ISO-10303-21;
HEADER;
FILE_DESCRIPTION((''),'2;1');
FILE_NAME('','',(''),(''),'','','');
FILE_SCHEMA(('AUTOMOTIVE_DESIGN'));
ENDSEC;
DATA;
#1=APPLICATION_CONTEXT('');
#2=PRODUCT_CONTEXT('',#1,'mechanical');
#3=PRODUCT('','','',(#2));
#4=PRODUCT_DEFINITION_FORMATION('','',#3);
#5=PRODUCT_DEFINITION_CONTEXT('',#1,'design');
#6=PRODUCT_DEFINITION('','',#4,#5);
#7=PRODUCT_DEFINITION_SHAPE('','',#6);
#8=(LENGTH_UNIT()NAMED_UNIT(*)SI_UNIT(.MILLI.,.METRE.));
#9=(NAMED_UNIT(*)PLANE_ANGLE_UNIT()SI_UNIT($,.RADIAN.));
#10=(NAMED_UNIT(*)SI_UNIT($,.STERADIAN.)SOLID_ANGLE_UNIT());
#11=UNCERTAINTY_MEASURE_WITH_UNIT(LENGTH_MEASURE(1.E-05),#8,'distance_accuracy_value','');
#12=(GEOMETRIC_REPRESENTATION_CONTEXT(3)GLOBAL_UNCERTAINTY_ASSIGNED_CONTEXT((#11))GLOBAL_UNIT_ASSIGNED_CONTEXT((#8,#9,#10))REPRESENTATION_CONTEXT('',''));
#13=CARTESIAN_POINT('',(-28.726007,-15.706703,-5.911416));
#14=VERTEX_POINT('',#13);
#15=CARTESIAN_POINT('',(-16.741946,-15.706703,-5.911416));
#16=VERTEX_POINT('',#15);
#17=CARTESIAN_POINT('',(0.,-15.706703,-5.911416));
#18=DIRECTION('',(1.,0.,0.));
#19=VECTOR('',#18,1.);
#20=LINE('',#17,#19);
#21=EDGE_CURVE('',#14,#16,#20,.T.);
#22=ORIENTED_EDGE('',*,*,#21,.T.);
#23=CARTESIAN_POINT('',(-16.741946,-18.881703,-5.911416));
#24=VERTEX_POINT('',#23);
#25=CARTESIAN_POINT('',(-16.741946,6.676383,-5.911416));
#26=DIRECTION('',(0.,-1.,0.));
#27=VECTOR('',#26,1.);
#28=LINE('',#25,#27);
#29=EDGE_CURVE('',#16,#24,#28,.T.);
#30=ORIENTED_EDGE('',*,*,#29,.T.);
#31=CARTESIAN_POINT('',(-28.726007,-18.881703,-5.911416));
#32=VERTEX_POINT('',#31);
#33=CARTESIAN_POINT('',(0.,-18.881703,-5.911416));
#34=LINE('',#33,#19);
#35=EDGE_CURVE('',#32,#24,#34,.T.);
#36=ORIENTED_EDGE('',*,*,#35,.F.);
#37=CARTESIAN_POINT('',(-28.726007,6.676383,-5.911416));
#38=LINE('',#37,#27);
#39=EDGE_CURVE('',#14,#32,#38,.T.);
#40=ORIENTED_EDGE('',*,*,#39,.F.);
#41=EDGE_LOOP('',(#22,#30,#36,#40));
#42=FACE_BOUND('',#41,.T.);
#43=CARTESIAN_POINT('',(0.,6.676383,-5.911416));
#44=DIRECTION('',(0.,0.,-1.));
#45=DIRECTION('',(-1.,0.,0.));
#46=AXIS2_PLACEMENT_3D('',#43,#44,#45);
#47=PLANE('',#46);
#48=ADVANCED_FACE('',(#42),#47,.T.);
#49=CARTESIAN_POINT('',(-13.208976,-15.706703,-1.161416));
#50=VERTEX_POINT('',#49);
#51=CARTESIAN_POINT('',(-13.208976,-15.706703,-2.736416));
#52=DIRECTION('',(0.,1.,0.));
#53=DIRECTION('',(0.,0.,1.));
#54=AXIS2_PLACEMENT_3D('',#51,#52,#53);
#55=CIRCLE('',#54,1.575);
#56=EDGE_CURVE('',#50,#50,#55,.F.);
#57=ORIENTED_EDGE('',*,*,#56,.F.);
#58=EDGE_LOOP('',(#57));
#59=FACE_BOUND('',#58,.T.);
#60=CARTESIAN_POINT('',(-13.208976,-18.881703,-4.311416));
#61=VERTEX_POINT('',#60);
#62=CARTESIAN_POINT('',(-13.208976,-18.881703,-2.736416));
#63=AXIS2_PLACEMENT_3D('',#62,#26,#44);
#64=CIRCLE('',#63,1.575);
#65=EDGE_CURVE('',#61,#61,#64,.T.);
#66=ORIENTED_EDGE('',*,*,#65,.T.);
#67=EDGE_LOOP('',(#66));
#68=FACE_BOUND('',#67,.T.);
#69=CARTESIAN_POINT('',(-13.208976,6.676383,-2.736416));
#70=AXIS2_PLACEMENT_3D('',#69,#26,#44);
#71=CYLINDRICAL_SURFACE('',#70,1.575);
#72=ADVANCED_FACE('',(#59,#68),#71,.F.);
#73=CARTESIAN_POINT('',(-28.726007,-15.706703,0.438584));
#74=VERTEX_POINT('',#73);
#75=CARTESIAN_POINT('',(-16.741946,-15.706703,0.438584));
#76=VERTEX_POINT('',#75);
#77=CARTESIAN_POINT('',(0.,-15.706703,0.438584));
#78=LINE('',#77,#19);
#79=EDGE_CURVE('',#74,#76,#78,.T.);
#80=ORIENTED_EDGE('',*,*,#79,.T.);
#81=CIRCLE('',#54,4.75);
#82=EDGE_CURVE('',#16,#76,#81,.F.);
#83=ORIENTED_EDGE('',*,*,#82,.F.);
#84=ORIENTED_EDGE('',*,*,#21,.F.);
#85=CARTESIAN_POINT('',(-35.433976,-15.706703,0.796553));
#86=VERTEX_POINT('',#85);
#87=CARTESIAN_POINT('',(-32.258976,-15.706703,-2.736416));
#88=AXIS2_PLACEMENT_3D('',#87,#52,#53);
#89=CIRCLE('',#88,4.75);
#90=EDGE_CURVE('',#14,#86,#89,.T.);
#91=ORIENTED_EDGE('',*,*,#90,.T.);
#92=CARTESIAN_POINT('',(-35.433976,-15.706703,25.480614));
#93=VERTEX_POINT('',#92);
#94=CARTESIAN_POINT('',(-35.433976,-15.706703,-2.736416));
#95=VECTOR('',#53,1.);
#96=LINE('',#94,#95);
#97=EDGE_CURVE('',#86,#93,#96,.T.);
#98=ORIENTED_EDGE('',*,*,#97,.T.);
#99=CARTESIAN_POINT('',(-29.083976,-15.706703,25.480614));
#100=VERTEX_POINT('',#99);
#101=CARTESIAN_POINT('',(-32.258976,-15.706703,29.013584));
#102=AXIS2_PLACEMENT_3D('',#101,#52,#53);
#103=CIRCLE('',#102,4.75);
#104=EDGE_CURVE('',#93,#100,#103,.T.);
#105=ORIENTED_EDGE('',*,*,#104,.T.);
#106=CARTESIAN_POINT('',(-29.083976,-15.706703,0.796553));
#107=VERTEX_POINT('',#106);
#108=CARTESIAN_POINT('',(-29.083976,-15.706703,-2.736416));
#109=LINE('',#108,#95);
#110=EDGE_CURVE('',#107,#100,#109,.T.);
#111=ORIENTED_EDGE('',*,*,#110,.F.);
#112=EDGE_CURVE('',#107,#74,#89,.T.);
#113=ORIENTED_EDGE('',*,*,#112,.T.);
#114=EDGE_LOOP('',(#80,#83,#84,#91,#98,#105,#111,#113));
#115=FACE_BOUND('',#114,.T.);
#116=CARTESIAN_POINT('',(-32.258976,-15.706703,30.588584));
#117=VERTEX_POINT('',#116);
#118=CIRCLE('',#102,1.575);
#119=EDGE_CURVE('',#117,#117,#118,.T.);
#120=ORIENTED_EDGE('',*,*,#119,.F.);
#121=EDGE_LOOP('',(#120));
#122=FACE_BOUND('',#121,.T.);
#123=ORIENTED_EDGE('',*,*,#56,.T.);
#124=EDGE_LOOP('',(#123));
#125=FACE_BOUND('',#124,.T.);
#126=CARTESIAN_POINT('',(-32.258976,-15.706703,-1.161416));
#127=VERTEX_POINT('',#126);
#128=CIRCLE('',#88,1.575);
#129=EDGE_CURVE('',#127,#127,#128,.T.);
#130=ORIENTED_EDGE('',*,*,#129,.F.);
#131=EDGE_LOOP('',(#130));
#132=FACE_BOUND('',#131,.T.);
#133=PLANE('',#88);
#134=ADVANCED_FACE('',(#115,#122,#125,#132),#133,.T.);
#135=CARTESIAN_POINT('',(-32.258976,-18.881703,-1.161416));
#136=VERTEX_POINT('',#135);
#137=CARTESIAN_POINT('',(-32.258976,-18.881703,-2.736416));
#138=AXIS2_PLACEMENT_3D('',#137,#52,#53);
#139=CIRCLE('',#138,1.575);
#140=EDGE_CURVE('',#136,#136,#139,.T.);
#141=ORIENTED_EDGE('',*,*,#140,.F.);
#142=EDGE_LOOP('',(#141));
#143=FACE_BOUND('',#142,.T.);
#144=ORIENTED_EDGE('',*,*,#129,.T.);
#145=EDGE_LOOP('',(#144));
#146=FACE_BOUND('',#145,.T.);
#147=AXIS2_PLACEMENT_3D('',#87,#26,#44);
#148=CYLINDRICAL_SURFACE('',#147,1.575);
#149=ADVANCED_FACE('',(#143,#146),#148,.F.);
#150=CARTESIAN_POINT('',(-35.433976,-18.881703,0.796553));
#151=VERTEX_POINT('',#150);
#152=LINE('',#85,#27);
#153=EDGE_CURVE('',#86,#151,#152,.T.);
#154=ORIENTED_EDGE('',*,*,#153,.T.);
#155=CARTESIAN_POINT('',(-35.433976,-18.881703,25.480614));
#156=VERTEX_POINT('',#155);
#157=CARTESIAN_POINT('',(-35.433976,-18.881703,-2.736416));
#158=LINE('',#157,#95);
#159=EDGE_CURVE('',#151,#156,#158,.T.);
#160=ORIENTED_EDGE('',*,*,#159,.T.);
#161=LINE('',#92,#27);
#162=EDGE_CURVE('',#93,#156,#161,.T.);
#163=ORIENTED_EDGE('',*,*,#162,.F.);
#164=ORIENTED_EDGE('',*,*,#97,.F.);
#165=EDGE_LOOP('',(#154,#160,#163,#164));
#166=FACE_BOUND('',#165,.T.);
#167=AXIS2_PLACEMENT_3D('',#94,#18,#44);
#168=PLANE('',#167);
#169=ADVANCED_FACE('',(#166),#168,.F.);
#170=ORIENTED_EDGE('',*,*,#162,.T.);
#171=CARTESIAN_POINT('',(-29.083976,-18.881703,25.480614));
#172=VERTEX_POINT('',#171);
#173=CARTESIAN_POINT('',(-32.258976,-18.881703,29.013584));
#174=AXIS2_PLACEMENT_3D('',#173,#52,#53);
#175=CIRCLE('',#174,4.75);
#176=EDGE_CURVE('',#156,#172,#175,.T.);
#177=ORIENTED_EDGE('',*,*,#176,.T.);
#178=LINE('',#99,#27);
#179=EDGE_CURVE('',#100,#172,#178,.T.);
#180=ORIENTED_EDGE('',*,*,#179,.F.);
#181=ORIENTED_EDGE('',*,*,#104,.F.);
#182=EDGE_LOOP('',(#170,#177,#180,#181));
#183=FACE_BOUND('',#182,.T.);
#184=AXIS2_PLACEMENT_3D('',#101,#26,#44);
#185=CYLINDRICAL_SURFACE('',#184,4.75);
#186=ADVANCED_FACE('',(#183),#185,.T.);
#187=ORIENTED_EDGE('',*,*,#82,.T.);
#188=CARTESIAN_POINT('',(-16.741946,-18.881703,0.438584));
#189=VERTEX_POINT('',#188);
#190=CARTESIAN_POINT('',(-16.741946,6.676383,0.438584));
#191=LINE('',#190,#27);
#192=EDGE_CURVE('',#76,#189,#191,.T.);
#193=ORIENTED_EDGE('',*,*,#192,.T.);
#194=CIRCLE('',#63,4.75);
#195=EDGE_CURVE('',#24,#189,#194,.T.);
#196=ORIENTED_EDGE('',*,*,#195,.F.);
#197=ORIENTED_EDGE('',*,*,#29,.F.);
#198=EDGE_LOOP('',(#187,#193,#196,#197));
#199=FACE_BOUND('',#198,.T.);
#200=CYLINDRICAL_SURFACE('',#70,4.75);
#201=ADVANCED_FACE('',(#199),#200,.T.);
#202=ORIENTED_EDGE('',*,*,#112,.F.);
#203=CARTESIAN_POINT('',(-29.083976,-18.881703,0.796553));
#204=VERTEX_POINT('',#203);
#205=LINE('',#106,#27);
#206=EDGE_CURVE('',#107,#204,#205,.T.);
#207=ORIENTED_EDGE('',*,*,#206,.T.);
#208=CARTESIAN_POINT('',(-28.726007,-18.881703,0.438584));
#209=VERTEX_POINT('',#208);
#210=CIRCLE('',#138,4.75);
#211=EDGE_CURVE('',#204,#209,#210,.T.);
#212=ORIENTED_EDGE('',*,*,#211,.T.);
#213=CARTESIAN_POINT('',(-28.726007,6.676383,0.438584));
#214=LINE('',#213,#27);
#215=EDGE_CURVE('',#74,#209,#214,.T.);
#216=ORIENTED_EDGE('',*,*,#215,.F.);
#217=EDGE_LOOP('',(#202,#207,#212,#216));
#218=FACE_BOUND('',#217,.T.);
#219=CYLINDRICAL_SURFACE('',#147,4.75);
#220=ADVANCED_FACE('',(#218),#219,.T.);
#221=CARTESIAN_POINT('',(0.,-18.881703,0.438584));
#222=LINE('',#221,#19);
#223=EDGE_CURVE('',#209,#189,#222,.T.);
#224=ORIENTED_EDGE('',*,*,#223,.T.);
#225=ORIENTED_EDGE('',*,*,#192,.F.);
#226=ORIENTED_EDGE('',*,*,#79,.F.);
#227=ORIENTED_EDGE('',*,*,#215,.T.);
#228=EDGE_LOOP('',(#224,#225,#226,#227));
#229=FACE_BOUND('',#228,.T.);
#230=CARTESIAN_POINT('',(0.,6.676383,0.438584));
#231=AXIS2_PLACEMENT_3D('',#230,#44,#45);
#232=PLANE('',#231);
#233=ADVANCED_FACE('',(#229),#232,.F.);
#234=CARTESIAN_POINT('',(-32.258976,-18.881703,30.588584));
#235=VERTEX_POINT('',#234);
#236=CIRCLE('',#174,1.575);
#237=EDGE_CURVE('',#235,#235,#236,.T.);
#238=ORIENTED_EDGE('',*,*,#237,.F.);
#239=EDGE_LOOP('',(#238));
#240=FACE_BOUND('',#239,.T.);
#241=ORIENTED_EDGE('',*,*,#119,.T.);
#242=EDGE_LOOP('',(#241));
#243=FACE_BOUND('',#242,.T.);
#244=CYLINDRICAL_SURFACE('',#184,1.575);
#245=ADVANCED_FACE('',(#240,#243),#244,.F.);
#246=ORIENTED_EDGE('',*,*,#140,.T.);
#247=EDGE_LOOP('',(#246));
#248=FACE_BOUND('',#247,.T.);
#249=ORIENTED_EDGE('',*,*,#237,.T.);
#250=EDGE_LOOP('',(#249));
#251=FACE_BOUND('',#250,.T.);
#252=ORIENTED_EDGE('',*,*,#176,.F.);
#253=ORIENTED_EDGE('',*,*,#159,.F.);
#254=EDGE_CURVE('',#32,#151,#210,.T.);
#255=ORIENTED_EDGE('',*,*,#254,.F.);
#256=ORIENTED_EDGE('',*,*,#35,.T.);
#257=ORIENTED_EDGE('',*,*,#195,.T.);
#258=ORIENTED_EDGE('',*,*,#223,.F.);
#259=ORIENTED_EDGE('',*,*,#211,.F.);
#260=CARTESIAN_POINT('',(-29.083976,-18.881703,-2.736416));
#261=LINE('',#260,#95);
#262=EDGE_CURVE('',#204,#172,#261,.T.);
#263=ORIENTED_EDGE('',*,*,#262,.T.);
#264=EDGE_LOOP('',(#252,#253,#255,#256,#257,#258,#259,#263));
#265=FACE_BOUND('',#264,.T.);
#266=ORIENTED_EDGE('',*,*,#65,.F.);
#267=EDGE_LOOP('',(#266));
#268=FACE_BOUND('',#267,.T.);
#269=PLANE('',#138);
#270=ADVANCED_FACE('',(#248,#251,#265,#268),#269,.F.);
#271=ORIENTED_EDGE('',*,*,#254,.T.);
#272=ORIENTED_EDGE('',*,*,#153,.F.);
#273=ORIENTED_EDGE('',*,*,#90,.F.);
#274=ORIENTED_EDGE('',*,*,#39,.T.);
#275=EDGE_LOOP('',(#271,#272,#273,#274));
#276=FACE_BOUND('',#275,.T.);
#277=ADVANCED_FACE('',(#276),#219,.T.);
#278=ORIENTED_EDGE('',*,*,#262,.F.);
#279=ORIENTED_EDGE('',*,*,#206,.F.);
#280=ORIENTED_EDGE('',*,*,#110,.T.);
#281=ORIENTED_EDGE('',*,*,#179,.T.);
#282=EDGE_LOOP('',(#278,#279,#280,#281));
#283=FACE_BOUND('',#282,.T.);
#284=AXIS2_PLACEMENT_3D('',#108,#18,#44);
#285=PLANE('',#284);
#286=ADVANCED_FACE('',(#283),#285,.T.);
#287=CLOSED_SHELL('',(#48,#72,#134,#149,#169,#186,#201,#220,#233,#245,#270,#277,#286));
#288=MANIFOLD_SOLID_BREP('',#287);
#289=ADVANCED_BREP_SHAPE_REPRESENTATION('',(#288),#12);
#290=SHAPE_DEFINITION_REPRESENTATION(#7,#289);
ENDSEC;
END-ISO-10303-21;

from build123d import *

# Parameters (mm, degrees)
LIFT_ARM_START         = -18.881702924
LIFT_ARM_OUTLINE_R     = 1.575
LIFT_ARM_DEPTH         = 3.175
LIFT_ARM_SKETCH_R      = 1.575
LIFT_ARM_EXTRUDE_DEPTH = 3.175


# Read off the part's stored shape, not the designer's step: Lift_Arm
with BuildPart() as part:
    # Lift_Arm outline → Lift_Arm (new body)
    with BuildSketch(Plane(origin=(0, 0, 0), x_dir=(1, 0, 0), z_dir=(0, 1, 0)).offset(LIFT_ARM_START)):
        with BuildLine():
            ThreePointArc((-35.433976258, -25.480614034), (-32.258976258, -33.763583748), (-29.083976258, -25.480614034))
            Line((-29.083976258, -25.480614034), (-29.083976258, -0.796553462))
            ThreePointArc((-29.083976258, -0.796553462), (-32.258976258, 7.486416252), (-35.433976258, -0.796553462))
            Line((-35.433976258, -0.796553462), (-35.433976258, -25.480614034))
        make_face()
        with Locations((-32.258976258, -29.013583748)):
            Circle(LIFT_ARM_OUTLINE_R, mode=Mode.SUBTRACT)
        with Locations((-32.258976258, 2.736416252)):
            Circle(LIFT_ARM_OUTLINE_R, mode=Mode.SUBTRACT)
    extrude(amount=LIFT_ARM_DEPTH)

    # Lift Arm Sketch → Lift Arm Extrude (add)
    with BuildSketch(Plane.XZ.offset(18.881702924)):
        with BuildLine():
            ThreePointArc((-28.726006544, 0.438583748), (-27.508976258, -2.736416252), (-28.726006544, -5.911416252))
            Line((-28.726006544, -5.911416252), (-16.741945972, -5.911416252))
            ThreePointArc((-16.741945972, -5.911416252), (-8.458976258, -2.736416252), (-16.741945972, 0.438583748))
            Line((-16.741945972, 0.438583748), (-28.726006544, 0.438583748))
        make_face()
        with Locations(Location((-13.208976258, -2.736416252, 0), (0, 0, 270))):
            Circle(LIFT_ARM_SKETCH_R, mode=Mode.SUBTRACT)
    extrude(amount=-LIFT_ARM_EXTRUDE_DEPTH)


solid = part.part
